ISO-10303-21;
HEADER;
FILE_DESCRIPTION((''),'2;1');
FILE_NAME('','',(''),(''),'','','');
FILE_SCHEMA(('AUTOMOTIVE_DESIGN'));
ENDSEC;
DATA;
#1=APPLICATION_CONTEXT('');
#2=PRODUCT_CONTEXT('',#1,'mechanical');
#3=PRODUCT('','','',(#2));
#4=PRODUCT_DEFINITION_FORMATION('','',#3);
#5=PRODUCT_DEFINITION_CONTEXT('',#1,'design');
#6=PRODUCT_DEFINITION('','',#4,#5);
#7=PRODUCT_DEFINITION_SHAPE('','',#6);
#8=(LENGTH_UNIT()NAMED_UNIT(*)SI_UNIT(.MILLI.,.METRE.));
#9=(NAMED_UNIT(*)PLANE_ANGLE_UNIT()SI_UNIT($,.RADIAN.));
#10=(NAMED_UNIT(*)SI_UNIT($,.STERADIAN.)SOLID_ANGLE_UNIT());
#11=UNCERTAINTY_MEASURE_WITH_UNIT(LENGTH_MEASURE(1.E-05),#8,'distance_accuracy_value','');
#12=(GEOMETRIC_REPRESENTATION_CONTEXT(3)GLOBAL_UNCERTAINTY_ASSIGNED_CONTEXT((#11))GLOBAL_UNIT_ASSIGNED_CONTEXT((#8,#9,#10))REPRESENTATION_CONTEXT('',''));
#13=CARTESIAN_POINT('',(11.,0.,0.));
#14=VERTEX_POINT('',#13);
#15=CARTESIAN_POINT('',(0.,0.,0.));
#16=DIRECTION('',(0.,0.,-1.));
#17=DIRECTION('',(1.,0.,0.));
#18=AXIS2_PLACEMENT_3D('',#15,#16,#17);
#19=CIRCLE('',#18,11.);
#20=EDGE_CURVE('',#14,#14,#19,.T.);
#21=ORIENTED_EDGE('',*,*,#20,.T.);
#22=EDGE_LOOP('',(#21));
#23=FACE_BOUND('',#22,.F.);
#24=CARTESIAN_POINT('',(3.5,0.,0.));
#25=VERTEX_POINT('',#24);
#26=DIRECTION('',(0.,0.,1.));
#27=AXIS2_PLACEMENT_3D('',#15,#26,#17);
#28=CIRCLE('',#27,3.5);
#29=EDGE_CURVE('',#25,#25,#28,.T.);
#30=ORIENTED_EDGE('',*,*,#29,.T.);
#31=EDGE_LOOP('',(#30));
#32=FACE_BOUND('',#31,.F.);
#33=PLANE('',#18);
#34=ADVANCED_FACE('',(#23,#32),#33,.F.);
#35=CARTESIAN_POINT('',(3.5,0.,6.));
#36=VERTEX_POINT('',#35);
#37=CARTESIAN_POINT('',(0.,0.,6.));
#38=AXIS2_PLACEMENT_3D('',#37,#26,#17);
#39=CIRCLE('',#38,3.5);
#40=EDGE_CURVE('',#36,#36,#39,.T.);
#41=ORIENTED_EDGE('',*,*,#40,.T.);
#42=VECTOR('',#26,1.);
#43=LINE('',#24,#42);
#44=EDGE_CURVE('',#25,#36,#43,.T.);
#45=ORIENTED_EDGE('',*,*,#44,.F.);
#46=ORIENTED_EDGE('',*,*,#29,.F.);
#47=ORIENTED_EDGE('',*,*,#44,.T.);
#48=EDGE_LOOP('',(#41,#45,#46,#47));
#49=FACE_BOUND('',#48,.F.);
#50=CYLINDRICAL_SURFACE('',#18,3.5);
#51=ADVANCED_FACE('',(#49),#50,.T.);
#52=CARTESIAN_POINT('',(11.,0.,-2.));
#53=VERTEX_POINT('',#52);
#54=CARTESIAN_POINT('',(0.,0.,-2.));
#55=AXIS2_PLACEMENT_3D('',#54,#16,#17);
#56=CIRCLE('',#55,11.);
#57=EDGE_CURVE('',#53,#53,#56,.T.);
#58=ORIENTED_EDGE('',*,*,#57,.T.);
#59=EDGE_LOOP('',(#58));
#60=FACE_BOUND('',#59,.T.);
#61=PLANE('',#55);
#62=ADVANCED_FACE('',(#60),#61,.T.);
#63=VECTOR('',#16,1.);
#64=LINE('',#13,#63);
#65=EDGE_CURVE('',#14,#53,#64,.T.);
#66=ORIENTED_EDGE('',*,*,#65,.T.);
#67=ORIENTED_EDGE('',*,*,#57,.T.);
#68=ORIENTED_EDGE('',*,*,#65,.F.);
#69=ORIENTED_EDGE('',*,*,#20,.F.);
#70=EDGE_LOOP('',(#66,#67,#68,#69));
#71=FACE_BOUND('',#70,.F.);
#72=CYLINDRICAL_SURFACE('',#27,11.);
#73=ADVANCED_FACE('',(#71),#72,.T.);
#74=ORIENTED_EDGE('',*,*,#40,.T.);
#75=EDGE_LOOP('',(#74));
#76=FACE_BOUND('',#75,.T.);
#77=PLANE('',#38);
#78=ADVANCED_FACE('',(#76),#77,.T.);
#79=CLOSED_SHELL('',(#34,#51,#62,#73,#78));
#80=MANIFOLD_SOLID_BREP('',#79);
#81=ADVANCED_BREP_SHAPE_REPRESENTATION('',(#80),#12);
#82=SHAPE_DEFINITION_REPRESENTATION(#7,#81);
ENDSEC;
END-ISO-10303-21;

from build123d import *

# Parameters (mm, degrees)
F0_R     = 3.5
F1_DEPTH = 6
F2_R     = 11
F2_R_2   = 3.5
F3_DEPTH = 2


with BuildPart() as f1:
    # F0 (on Top) → F1 (new body)
    with BuildSketch(Plane.XY):
        Circle(F0_R)
    extrude(amount=F1_DEPTH)

    # F2 (on face) → F3 (join)
    with BuildSketch(Plane(origin=(0, 0, 0), x_dir=(1, 0, 0), z_dir=(0, 0, -1))):
        Circle(F2_R)
        Circle(F2_R_2, mode=Mode.SUBTRACT)
        Circle(F2_R_2)
    extrude(amount=F3_DEPTH)


solid = f1.part
